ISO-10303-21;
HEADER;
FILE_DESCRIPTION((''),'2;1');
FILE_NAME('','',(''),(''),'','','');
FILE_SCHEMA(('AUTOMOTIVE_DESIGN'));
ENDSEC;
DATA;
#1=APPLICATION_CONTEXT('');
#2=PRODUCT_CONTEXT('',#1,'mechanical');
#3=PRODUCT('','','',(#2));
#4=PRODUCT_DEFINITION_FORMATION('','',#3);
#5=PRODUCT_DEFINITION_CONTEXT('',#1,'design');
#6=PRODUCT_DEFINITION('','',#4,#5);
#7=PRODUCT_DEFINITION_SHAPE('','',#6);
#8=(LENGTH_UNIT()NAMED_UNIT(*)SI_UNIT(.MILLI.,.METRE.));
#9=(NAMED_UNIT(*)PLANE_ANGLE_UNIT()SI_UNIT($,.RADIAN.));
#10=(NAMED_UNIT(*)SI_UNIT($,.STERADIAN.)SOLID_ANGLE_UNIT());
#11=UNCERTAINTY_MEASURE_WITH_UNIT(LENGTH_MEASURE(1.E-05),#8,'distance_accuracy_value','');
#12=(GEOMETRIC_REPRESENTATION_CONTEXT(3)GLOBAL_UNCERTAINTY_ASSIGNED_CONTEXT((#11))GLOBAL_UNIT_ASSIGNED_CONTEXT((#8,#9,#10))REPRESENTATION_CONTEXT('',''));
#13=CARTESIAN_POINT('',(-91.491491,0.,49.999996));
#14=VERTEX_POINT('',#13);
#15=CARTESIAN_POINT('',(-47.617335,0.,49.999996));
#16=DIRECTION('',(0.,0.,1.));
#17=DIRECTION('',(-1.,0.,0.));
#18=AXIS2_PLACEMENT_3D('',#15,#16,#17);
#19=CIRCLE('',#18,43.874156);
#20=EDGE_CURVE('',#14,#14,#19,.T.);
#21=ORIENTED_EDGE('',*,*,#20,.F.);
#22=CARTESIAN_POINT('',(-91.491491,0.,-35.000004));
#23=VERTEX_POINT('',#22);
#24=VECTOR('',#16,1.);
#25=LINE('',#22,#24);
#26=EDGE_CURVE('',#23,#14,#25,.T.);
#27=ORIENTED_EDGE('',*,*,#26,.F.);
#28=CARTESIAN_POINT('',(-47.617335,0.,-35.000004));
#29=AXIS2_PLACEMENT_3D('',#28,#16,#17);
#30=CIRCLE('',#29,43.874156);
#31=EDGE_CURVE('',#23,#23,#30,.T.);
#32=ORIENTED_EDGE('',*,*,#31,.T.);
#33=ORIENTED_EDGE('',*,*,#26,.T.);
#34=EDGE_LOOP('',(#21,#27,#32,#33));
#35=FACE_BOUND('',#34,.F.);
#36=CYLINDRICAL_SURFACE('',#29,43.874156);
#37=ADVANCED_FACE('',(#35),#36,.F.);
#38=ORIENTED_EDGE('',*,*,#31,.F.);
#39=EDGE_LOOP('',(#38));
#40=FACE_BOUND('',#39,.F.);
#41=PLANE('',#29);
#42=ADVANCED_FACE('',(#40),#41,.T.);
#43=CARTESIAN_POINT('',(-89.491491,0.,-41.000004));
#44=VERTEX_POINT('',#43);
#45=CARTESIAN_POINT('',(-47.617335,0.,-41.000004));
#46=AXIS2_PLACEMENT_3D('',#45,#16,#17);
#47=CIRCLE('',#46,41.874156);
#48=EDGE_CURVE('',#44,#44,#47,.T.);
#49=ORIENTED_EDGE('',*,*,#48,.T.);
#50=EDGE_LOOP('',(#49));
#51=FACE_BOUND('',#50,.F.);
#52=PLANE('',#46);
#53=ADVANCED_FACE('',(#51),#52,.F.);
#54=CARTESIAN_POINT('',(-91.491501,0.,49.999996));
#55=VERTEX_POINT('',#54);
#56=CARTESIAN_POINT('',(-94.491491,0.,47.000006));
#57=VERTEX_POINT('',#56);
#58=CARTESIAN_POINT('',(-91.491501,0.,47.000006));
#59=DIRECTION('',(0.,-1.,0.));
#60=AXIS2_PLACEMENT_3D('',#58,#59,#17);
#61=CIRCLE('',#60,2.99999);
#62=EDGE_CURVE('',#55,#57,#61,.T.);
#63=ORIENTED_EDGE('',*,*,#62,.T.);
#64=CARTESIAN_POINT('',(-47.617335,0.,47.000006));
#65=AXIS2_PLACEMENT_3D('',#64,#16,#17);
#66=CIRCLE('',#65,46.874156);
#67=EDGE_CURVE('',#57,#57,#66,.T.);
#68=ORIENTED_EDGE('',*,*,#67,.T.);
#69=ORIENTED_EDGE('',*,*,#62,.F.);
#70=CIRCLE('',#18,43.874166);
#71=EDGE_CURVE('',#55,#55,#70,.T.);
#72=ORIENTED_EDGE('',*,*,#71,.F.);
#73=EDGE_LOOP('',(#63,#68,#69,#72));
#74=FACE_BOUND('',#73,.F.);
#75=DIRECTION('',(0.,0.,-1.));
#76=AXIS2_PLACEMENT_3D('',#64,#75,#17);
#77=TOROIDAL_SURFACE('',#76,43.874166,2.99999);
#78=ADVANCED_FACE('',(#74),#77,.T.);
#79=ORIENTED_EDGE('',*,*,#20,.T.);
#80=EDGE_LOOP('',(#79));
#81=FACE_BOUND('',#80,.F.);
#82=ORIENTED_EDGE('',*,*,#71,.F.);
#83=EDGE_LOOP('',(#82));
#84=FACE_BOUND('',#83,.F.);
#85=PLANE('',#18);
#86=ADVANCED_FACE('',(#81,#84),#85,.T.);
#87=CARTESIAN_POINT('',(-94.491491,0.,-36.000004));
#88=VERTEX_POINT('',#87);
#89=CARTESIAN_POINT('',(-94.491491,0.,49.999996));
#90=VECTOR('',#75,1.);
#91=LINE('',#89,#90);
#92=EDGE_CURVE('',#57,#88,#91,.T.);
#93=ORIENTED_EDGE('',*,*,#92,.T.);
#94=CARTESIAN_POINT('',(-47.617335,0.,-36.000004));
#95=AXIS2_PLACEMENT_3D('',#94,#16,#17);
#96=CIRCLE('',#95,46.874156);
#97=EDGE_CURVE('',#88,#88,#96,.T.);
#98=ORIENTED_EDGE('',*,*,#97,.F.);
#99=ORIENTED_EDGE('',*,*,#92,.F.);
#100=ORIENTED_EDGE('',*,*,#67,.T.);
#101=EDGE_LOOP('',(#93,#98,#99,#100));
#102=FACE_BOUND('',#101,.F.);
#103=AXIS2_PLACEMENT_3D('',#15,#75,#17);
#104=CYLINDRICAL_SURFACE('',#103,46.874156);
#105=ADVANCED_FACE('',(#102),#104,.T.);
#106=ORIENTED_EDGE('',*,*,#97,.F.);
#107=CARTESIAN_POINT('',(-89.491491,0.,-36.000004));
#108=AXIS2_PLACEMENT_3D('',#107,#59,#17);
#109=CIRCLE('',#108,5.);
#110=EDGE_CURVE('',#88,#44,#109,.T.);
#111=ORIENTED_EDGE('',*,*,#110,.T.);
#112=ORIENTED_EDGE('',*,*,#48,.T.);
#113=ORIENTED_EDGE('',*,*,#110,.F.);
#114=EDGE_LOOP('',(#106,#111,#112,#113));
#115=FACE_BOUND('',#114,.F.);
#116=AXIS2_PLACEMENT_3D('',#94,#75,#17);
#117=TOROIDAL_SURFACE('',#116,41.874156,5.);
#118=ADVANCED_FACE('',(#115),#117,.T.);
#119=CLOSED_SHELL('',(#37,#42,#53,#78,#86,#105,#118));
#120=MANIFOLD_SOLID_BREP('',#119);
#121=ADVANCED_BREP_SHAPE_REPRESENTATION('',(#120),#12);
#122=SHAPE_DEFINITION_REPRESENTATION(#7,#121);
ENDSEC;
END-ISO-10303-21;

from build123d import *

# Parameters (mm, degrees)
F2_R = 2.99999
F3_R = 5


# Not quite as in the source:
# - a fillet or chamfer is up to 0.001 mm smaller than in the source, because OpenCascade refuses the exact size


with BuildPart() as f1:
    # F0 (on Front) → F1 (revolve)
    with BuildSketch(Plane.XZ):
        Polygon((-91.4914906025, 49.9999961555), (-94.4914906025, 49.9999961555), (-94.4914906025, -41.0000038445), (-47.6173348725, -41.0000038445), (-47.6173348725, -35.0000038445), (-91.4914906025, -35.0000038445), align=None)
    revolve(axis=Axis((-47.6173348725, 0, -38.0000038445), (0, 0, 1)))

    # F2 (radius 3 in the source; OpenCascade refuses exactly that, so slightly less here)
    f2_edges = [f1.edges().sort_by_distance(p)[0] for p in [
        (-0.743179, 0, 49.999996),
    ]]
    fillet(f2_edges, radius=F2_R)

    # F3
    f3_edges = [f1.edges().sort_by_distance(p)[0] for p in [
        (-0.743179, 0, -41.000004),
    ]]
    fillet(f3_edges, radius=F3_R)


solid = f1.part
